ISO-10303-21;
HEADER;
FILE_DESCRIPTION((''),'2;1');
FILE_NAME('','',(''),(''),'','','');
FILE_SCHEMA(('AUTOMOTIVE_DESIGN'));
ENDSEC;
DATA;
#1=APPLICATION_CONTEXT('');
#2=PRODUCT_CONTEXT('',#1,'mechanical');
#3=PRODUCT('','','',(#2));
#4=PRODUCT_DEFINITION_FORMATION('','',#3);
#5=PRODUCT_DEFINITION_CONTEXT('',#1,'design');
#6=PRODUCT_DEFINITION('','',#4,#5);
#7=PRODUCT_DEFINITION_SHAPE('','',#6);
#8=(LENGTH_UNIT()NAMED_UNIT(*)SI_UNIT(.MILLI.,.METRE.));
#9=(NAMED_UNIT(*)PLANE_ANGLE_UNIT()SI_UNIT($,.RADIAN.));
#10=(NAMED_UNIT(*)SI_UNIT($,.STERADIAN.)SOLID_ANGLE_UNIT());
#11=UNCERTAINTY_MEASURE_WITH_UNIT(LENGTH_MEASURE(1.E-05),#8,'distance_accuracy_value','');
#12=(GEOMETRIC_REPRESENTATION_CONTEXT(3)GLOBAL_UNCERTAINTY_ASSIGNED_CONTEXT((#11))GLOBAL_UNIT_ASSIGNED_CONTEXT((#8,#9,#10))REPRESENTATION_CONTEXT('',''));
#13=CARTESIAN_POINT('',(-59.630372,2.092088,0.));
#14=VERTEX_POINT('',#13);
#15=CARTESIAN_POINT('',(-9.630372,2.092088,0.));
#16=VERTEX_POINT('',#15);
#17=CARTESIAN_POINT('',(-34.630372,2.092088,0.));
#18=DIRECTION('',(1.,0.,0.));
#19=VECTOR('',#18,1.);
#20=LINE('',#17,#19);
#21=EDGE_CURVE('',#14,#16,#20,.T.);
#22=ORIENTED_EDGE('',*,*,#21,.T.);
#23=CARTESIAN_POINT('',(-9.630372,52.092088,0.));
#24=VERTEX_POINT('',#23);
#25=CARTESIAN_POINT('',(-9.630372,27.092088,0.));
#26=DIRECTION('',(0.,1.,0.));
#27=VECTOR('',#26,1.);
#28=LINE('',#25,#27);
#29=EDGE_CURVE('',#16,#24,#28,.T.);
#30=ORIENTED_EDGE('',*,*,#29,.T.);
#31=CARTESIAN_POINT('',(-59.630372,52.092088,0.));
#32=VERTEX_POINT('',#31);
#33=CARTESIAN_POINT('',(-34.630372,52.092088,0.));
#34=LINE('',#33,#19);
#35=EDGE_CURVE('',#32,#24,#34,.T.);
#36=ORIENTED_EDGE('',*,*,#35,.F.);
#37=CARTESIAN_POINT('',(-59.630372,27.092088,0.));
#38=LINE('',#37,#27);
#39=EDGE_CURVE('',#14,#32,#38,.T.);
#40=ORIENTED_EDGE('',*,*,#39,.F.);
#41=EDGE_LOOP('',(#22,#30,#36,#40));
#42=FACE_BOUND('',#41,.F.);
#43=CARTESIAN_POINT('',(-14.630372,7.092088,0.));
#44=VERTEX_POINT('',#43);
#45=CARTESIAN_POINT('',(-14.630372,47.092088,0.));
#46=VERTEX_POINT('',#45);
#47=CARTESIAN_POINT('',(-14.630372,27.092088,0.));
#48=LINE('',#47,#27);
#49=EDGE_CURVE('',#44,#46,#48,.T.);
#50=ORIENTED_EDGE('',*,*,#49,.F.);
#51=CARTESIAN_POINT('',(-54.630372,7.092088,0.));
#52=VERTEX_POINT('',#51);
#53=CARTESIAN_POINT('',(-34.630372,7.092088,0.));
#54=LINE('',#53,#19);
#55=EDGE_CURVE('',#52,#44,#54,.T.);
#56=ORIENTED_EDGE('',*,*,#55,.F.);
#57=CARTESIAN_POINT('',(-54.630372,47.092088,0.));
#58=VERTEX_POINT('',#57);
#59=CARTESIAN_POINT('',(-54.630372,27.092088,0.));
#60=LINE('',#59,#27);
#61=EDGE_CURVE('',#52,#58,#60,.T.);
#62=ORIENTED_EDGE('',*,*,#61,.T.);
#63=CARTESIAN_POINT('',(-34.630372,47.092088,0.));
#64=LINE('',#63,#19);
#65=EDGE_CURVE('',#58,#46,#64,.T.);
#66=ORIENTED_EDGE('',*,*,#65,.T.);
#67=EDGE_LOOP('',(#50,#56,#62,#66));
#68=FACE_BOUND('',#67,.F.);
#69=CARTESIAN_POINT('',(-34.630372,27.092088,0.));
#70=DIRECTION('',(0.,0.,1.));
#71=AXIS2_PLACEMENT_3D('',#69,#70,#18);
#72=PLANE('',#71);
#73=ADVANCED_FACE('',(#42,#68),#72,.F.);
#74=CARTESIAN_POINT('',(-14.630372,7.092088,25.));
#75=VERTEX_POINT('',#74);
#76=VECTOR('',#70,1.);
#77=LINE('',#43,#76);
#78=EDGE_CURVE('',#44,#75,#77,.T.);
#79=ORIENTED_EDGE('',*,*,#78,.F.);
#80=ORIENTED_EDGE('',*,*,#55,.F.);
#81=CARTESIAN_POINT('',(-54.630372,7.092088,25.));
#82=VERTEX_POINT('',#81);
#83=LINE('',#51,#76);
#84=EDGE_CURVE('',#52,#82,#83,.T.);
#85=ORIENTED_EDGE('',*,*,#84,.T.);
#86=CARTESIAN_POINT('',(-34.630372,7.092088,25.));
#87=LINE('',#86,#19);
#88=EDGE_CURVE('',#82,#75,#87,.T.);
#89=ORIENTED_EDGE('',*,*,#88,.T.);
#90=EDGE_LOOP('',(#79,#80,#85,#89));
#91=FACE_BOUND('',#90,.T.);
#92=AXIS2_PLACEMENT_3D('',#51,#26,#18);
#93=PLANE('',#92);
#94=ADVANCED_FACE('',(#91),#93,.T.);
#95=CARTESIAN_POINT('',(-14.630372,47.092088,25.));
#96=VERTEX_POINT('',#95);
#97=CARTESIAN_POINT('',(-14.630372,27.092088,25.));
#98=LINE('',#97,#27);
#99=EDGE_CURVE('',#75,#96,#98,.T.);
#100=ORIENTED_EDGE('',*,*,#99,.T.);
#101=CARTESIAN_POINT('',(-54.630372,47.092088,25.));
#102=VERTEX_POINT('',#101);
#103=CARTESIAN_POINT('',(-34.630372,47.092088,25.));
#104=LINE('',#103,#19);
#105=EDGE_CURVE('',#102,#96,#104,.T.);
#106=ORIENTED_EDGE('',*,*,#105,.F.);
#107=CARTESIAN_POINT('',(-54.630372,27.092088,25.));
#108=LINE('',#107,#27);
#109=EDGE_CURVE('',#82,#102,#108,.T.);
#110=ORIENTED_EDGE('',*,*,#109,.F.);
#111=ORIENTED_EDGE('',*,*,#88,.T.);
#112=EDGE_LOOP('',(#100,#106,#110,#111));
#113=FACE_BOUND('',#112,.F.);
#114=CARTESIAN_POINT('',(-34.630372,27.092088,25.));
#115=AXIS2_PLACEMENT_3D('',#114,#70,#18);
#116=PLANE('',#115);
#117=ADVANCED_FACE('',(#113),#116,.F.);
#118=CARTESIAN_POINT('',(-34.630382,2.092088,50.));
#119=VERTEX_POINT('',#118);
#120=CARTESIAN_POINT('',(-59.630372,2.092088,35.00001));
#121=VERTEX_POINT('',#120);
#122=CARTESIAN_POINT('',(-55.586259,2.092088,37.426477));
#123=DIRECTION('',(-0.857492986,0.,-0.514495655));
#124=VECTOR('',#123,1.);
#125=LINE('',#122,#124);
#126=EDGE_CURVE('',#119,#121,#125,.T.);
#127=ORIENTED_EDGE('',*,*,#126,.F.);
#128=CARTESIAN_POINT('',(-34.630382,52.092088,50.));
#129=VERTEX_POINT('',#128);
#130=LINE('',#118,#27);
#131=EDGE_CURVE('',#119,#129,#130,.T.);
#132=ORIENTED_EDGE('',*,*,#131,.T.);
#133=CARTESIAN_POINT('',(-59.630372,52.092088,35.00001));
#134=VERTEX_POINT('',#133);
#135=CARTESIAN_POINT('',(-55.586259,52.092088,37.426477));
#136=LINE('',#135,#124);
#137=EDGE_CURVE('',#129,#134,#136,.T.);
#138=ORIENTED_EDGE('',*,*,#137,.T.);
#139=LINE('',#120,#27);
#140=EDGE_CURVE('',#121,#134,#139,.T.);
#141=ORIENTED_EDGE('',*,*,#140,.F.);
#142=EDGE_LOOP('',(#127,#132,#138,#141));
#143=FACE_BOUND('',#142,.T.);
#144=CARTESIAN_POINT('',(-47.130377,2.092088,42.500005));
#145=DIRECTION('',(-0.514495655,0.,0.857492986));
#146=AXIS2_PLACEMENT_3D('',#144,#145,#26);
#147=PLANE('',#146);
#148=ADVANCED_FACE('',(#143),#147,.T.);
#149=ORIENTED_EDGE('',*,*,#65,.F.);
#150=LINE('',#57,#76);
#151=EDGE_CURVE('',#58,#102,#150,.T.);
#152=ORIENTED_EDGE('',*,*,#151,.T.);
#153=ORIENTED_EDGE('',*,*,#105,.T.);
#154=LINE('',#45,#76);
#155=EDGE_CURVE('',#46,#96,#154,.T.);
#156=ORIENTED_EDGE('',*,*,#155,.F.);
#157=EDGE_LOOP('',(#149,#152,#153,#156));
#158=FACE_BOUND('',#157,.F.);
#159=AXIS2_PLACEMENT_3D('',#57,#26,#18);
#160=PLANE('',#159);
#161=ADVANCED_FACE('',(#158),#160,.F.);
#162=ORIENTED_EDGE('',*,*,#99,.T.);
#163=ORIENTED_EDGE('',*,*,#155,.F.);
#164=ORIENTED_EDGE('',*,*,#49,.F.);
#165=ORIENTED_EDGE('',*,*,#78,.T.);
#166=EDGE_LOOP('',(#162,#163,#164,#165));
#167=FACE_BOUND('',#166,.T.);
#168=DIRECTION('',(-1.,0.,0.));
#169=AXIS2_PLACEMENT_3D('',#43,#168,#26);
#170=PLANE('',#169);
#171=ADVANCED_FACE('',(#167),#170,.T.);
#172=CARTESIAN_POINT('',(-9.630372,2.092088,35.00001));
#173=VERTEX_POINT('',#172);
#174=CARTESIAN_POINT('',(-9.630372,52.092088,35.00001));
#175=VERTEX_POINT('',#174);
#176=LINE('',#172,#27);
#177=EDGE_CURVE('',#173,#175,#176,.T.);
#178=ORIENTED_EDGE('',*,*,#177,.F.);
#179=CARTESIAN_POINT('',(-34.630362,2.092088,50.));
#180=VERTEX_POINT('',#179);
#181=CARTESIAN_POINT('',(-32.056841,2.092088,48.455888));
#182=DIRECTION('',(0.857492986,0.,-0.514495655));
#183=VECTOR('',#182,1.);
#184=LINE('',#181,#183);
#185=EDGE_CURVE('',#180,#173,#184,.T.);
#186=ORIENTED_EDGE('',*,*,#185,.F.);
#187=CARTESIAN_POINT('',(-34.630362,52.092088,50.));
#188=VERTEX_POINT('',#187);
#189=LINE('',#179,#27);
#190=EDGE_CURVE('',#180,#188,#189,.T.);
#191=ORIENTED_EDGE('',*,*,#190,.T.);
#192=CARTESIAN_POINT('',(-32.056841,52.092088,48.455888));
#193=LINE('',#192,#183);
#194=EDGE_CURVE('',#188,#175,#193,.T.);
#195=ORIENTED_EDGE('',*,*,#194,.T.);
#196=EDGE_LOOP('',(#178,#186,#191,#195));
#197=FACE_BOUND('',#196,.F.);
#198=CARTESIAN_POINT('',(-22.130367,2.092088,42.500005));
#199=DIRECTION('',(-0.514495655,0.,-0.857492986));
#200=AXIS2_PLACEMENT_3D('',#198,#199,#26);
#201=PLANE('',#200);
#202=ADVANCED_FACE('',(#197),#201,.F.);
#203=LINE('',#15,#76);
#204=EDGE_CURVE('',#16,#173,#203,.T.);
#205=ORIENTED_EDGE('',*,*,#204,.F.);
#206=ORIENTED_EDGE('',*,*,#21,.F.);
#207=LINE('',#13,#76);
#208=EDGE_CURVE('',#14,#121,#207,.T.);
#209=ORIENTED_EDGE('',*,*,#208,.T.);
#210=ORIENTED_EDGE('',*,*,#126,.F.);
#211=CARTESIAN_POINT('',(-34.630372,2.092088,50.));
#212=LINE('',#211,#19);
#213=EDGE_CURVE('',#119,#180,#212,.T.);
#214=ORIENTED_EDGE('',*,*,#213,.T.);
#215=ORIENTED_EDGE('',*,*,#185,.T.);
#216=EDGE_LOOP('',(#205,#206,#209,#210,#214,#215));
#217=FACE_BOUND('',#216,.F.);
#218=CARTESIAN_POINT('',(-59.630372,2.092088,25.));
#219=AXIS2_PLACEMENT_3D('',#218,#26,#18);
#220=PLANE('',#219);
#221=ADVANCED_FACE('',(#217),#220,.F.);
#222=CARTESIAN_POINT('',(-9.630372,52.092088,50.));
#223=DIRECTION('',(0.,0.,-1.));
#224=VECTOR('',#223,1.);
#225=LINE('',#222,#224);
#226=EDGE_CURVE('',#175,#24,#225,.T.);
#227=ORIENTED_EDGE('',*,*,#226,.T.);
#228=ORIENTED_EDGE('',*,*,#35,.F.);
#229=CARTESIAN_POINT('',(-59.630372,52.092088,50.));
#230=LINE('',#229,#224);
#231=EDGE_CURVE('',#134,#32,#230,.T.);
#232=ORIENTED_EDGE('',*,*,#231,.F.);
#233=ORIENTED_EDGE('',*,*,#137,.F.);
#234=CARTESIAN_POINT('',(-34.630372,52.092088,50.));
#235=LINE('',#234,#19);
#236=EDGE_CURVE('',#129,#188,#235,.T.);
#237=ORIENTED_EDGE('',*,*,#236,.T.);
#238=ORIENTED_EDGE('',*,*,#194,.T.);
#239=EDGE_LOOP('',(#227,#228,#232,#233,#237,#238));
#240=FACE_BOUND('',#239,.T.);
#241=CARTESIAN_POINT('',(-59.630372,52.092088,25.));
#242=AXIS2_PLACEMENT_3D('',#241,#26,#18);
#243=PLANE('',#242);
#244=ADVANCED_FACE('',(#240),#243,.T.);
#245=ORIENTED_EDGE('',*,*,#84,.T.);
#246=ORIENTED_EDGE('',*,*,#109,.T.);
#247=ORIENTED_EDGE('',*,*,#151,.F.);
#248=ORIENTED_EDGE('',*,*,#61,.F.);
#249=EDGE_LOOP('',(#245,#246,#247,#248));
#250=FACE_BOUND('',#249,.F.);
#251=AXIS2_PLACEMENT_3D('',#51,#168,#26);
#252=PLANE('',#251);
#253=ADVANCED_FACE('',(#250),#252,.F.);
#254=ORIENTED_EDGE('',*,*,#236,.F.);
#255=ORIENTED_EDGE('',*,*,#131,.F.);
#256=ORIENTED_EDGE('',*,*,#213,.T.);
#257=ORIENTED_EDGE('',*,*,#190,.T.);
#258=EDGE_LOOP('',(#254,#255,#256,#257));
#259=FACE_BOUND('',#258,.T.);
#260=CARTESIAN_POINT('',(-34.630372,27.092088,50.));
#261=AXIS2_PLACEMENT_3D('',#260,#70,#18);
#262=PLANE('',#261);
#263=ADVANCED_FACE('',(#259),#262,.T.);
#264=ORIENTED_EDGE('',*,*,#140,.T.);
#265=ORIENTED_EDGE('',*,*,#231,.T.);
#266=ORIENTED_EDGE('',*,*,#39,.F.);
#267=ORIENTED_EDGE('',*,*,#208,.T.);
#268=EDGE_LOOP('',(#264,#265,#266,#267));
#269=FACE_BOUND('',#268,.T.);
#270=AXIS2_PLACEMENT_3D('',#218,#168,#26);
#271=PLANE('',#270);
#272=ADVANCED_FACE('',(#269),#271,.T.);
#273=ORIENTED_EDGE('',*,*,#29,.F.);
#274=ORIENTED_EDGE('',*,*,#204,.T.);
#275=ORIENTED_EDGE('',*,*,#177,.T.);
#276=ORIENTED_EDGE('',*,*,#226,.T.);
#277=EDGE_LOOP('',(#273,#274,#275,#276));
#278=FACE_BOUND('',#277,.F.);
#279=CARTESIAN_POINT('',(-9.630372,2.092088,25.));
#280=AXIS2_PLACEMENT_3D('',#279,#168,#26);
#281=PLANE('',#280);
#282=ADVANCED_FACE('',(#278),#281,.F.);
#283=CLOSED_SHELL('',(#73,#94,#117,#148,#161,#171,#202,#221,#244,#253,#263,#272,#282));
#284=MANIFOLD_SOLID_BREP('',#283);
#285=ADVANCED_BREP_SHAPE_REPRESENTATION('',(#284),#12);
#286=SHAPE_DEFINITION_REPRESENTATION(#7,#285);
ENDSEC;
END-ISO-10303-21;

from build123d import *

# Parameters (mm, degrees)
F0_W     = 50
F0_H     = 50
F0_W_2   = 40
F0_H_2   = 40
F1_DEPTH = 25
F2_W     = 50
F2_H     = 50
F3_DEPTH = 25
F4_SIZE2 = 14.99999
F4_SIZE  = 24.99999


# Not quite as in the source:
# - a fillet or chamfer is up to 0.001 mm smaller than in the source, because OpenCascade refuses the exact size


with BuildPart() as f1:
    # F0 (on Top) → F1 (new body)
    with BuildSketch(Plane.XY):
        with Locations((-34.6303719711, 27.0920880139)):
            Rectangle(F0_W, F0_H)
        with Locations((-34.6303719711, 27.0920880139)):
            Rectangle(F0_W_2, F0_H_2, mode=Mode.SUBTRACT)
    extrude(amount=F1_DEPTH)

    # F2 (on face) → F3 (join)
    with BuildSketch(Plane.XY.offset(25)):
        with Locations((-34.6303719711, 27.0920880139)):
            Rectangle(F2_W, F2_H)
    extrude(amount=F3_DEPTH)

    # F4 (size 25 and 15 in the source; OpenCascade refuses exactly that, so slightly less here)
    f4_edges = [f1.edges().sort_by_distance(p)[0] for p in [
        (-59.630372, 27.092088, 50),
        (-9.630372, 27.092088, 50),
    ]]
    f4_side = f1.faces().sort_by_distance((-34.630372, 27.092088, 50))[0]
    chamfer(f4_edges, length=F4_SIZE, length2=F4_SIZE2, reference=f4_side)


solid = f1.part
